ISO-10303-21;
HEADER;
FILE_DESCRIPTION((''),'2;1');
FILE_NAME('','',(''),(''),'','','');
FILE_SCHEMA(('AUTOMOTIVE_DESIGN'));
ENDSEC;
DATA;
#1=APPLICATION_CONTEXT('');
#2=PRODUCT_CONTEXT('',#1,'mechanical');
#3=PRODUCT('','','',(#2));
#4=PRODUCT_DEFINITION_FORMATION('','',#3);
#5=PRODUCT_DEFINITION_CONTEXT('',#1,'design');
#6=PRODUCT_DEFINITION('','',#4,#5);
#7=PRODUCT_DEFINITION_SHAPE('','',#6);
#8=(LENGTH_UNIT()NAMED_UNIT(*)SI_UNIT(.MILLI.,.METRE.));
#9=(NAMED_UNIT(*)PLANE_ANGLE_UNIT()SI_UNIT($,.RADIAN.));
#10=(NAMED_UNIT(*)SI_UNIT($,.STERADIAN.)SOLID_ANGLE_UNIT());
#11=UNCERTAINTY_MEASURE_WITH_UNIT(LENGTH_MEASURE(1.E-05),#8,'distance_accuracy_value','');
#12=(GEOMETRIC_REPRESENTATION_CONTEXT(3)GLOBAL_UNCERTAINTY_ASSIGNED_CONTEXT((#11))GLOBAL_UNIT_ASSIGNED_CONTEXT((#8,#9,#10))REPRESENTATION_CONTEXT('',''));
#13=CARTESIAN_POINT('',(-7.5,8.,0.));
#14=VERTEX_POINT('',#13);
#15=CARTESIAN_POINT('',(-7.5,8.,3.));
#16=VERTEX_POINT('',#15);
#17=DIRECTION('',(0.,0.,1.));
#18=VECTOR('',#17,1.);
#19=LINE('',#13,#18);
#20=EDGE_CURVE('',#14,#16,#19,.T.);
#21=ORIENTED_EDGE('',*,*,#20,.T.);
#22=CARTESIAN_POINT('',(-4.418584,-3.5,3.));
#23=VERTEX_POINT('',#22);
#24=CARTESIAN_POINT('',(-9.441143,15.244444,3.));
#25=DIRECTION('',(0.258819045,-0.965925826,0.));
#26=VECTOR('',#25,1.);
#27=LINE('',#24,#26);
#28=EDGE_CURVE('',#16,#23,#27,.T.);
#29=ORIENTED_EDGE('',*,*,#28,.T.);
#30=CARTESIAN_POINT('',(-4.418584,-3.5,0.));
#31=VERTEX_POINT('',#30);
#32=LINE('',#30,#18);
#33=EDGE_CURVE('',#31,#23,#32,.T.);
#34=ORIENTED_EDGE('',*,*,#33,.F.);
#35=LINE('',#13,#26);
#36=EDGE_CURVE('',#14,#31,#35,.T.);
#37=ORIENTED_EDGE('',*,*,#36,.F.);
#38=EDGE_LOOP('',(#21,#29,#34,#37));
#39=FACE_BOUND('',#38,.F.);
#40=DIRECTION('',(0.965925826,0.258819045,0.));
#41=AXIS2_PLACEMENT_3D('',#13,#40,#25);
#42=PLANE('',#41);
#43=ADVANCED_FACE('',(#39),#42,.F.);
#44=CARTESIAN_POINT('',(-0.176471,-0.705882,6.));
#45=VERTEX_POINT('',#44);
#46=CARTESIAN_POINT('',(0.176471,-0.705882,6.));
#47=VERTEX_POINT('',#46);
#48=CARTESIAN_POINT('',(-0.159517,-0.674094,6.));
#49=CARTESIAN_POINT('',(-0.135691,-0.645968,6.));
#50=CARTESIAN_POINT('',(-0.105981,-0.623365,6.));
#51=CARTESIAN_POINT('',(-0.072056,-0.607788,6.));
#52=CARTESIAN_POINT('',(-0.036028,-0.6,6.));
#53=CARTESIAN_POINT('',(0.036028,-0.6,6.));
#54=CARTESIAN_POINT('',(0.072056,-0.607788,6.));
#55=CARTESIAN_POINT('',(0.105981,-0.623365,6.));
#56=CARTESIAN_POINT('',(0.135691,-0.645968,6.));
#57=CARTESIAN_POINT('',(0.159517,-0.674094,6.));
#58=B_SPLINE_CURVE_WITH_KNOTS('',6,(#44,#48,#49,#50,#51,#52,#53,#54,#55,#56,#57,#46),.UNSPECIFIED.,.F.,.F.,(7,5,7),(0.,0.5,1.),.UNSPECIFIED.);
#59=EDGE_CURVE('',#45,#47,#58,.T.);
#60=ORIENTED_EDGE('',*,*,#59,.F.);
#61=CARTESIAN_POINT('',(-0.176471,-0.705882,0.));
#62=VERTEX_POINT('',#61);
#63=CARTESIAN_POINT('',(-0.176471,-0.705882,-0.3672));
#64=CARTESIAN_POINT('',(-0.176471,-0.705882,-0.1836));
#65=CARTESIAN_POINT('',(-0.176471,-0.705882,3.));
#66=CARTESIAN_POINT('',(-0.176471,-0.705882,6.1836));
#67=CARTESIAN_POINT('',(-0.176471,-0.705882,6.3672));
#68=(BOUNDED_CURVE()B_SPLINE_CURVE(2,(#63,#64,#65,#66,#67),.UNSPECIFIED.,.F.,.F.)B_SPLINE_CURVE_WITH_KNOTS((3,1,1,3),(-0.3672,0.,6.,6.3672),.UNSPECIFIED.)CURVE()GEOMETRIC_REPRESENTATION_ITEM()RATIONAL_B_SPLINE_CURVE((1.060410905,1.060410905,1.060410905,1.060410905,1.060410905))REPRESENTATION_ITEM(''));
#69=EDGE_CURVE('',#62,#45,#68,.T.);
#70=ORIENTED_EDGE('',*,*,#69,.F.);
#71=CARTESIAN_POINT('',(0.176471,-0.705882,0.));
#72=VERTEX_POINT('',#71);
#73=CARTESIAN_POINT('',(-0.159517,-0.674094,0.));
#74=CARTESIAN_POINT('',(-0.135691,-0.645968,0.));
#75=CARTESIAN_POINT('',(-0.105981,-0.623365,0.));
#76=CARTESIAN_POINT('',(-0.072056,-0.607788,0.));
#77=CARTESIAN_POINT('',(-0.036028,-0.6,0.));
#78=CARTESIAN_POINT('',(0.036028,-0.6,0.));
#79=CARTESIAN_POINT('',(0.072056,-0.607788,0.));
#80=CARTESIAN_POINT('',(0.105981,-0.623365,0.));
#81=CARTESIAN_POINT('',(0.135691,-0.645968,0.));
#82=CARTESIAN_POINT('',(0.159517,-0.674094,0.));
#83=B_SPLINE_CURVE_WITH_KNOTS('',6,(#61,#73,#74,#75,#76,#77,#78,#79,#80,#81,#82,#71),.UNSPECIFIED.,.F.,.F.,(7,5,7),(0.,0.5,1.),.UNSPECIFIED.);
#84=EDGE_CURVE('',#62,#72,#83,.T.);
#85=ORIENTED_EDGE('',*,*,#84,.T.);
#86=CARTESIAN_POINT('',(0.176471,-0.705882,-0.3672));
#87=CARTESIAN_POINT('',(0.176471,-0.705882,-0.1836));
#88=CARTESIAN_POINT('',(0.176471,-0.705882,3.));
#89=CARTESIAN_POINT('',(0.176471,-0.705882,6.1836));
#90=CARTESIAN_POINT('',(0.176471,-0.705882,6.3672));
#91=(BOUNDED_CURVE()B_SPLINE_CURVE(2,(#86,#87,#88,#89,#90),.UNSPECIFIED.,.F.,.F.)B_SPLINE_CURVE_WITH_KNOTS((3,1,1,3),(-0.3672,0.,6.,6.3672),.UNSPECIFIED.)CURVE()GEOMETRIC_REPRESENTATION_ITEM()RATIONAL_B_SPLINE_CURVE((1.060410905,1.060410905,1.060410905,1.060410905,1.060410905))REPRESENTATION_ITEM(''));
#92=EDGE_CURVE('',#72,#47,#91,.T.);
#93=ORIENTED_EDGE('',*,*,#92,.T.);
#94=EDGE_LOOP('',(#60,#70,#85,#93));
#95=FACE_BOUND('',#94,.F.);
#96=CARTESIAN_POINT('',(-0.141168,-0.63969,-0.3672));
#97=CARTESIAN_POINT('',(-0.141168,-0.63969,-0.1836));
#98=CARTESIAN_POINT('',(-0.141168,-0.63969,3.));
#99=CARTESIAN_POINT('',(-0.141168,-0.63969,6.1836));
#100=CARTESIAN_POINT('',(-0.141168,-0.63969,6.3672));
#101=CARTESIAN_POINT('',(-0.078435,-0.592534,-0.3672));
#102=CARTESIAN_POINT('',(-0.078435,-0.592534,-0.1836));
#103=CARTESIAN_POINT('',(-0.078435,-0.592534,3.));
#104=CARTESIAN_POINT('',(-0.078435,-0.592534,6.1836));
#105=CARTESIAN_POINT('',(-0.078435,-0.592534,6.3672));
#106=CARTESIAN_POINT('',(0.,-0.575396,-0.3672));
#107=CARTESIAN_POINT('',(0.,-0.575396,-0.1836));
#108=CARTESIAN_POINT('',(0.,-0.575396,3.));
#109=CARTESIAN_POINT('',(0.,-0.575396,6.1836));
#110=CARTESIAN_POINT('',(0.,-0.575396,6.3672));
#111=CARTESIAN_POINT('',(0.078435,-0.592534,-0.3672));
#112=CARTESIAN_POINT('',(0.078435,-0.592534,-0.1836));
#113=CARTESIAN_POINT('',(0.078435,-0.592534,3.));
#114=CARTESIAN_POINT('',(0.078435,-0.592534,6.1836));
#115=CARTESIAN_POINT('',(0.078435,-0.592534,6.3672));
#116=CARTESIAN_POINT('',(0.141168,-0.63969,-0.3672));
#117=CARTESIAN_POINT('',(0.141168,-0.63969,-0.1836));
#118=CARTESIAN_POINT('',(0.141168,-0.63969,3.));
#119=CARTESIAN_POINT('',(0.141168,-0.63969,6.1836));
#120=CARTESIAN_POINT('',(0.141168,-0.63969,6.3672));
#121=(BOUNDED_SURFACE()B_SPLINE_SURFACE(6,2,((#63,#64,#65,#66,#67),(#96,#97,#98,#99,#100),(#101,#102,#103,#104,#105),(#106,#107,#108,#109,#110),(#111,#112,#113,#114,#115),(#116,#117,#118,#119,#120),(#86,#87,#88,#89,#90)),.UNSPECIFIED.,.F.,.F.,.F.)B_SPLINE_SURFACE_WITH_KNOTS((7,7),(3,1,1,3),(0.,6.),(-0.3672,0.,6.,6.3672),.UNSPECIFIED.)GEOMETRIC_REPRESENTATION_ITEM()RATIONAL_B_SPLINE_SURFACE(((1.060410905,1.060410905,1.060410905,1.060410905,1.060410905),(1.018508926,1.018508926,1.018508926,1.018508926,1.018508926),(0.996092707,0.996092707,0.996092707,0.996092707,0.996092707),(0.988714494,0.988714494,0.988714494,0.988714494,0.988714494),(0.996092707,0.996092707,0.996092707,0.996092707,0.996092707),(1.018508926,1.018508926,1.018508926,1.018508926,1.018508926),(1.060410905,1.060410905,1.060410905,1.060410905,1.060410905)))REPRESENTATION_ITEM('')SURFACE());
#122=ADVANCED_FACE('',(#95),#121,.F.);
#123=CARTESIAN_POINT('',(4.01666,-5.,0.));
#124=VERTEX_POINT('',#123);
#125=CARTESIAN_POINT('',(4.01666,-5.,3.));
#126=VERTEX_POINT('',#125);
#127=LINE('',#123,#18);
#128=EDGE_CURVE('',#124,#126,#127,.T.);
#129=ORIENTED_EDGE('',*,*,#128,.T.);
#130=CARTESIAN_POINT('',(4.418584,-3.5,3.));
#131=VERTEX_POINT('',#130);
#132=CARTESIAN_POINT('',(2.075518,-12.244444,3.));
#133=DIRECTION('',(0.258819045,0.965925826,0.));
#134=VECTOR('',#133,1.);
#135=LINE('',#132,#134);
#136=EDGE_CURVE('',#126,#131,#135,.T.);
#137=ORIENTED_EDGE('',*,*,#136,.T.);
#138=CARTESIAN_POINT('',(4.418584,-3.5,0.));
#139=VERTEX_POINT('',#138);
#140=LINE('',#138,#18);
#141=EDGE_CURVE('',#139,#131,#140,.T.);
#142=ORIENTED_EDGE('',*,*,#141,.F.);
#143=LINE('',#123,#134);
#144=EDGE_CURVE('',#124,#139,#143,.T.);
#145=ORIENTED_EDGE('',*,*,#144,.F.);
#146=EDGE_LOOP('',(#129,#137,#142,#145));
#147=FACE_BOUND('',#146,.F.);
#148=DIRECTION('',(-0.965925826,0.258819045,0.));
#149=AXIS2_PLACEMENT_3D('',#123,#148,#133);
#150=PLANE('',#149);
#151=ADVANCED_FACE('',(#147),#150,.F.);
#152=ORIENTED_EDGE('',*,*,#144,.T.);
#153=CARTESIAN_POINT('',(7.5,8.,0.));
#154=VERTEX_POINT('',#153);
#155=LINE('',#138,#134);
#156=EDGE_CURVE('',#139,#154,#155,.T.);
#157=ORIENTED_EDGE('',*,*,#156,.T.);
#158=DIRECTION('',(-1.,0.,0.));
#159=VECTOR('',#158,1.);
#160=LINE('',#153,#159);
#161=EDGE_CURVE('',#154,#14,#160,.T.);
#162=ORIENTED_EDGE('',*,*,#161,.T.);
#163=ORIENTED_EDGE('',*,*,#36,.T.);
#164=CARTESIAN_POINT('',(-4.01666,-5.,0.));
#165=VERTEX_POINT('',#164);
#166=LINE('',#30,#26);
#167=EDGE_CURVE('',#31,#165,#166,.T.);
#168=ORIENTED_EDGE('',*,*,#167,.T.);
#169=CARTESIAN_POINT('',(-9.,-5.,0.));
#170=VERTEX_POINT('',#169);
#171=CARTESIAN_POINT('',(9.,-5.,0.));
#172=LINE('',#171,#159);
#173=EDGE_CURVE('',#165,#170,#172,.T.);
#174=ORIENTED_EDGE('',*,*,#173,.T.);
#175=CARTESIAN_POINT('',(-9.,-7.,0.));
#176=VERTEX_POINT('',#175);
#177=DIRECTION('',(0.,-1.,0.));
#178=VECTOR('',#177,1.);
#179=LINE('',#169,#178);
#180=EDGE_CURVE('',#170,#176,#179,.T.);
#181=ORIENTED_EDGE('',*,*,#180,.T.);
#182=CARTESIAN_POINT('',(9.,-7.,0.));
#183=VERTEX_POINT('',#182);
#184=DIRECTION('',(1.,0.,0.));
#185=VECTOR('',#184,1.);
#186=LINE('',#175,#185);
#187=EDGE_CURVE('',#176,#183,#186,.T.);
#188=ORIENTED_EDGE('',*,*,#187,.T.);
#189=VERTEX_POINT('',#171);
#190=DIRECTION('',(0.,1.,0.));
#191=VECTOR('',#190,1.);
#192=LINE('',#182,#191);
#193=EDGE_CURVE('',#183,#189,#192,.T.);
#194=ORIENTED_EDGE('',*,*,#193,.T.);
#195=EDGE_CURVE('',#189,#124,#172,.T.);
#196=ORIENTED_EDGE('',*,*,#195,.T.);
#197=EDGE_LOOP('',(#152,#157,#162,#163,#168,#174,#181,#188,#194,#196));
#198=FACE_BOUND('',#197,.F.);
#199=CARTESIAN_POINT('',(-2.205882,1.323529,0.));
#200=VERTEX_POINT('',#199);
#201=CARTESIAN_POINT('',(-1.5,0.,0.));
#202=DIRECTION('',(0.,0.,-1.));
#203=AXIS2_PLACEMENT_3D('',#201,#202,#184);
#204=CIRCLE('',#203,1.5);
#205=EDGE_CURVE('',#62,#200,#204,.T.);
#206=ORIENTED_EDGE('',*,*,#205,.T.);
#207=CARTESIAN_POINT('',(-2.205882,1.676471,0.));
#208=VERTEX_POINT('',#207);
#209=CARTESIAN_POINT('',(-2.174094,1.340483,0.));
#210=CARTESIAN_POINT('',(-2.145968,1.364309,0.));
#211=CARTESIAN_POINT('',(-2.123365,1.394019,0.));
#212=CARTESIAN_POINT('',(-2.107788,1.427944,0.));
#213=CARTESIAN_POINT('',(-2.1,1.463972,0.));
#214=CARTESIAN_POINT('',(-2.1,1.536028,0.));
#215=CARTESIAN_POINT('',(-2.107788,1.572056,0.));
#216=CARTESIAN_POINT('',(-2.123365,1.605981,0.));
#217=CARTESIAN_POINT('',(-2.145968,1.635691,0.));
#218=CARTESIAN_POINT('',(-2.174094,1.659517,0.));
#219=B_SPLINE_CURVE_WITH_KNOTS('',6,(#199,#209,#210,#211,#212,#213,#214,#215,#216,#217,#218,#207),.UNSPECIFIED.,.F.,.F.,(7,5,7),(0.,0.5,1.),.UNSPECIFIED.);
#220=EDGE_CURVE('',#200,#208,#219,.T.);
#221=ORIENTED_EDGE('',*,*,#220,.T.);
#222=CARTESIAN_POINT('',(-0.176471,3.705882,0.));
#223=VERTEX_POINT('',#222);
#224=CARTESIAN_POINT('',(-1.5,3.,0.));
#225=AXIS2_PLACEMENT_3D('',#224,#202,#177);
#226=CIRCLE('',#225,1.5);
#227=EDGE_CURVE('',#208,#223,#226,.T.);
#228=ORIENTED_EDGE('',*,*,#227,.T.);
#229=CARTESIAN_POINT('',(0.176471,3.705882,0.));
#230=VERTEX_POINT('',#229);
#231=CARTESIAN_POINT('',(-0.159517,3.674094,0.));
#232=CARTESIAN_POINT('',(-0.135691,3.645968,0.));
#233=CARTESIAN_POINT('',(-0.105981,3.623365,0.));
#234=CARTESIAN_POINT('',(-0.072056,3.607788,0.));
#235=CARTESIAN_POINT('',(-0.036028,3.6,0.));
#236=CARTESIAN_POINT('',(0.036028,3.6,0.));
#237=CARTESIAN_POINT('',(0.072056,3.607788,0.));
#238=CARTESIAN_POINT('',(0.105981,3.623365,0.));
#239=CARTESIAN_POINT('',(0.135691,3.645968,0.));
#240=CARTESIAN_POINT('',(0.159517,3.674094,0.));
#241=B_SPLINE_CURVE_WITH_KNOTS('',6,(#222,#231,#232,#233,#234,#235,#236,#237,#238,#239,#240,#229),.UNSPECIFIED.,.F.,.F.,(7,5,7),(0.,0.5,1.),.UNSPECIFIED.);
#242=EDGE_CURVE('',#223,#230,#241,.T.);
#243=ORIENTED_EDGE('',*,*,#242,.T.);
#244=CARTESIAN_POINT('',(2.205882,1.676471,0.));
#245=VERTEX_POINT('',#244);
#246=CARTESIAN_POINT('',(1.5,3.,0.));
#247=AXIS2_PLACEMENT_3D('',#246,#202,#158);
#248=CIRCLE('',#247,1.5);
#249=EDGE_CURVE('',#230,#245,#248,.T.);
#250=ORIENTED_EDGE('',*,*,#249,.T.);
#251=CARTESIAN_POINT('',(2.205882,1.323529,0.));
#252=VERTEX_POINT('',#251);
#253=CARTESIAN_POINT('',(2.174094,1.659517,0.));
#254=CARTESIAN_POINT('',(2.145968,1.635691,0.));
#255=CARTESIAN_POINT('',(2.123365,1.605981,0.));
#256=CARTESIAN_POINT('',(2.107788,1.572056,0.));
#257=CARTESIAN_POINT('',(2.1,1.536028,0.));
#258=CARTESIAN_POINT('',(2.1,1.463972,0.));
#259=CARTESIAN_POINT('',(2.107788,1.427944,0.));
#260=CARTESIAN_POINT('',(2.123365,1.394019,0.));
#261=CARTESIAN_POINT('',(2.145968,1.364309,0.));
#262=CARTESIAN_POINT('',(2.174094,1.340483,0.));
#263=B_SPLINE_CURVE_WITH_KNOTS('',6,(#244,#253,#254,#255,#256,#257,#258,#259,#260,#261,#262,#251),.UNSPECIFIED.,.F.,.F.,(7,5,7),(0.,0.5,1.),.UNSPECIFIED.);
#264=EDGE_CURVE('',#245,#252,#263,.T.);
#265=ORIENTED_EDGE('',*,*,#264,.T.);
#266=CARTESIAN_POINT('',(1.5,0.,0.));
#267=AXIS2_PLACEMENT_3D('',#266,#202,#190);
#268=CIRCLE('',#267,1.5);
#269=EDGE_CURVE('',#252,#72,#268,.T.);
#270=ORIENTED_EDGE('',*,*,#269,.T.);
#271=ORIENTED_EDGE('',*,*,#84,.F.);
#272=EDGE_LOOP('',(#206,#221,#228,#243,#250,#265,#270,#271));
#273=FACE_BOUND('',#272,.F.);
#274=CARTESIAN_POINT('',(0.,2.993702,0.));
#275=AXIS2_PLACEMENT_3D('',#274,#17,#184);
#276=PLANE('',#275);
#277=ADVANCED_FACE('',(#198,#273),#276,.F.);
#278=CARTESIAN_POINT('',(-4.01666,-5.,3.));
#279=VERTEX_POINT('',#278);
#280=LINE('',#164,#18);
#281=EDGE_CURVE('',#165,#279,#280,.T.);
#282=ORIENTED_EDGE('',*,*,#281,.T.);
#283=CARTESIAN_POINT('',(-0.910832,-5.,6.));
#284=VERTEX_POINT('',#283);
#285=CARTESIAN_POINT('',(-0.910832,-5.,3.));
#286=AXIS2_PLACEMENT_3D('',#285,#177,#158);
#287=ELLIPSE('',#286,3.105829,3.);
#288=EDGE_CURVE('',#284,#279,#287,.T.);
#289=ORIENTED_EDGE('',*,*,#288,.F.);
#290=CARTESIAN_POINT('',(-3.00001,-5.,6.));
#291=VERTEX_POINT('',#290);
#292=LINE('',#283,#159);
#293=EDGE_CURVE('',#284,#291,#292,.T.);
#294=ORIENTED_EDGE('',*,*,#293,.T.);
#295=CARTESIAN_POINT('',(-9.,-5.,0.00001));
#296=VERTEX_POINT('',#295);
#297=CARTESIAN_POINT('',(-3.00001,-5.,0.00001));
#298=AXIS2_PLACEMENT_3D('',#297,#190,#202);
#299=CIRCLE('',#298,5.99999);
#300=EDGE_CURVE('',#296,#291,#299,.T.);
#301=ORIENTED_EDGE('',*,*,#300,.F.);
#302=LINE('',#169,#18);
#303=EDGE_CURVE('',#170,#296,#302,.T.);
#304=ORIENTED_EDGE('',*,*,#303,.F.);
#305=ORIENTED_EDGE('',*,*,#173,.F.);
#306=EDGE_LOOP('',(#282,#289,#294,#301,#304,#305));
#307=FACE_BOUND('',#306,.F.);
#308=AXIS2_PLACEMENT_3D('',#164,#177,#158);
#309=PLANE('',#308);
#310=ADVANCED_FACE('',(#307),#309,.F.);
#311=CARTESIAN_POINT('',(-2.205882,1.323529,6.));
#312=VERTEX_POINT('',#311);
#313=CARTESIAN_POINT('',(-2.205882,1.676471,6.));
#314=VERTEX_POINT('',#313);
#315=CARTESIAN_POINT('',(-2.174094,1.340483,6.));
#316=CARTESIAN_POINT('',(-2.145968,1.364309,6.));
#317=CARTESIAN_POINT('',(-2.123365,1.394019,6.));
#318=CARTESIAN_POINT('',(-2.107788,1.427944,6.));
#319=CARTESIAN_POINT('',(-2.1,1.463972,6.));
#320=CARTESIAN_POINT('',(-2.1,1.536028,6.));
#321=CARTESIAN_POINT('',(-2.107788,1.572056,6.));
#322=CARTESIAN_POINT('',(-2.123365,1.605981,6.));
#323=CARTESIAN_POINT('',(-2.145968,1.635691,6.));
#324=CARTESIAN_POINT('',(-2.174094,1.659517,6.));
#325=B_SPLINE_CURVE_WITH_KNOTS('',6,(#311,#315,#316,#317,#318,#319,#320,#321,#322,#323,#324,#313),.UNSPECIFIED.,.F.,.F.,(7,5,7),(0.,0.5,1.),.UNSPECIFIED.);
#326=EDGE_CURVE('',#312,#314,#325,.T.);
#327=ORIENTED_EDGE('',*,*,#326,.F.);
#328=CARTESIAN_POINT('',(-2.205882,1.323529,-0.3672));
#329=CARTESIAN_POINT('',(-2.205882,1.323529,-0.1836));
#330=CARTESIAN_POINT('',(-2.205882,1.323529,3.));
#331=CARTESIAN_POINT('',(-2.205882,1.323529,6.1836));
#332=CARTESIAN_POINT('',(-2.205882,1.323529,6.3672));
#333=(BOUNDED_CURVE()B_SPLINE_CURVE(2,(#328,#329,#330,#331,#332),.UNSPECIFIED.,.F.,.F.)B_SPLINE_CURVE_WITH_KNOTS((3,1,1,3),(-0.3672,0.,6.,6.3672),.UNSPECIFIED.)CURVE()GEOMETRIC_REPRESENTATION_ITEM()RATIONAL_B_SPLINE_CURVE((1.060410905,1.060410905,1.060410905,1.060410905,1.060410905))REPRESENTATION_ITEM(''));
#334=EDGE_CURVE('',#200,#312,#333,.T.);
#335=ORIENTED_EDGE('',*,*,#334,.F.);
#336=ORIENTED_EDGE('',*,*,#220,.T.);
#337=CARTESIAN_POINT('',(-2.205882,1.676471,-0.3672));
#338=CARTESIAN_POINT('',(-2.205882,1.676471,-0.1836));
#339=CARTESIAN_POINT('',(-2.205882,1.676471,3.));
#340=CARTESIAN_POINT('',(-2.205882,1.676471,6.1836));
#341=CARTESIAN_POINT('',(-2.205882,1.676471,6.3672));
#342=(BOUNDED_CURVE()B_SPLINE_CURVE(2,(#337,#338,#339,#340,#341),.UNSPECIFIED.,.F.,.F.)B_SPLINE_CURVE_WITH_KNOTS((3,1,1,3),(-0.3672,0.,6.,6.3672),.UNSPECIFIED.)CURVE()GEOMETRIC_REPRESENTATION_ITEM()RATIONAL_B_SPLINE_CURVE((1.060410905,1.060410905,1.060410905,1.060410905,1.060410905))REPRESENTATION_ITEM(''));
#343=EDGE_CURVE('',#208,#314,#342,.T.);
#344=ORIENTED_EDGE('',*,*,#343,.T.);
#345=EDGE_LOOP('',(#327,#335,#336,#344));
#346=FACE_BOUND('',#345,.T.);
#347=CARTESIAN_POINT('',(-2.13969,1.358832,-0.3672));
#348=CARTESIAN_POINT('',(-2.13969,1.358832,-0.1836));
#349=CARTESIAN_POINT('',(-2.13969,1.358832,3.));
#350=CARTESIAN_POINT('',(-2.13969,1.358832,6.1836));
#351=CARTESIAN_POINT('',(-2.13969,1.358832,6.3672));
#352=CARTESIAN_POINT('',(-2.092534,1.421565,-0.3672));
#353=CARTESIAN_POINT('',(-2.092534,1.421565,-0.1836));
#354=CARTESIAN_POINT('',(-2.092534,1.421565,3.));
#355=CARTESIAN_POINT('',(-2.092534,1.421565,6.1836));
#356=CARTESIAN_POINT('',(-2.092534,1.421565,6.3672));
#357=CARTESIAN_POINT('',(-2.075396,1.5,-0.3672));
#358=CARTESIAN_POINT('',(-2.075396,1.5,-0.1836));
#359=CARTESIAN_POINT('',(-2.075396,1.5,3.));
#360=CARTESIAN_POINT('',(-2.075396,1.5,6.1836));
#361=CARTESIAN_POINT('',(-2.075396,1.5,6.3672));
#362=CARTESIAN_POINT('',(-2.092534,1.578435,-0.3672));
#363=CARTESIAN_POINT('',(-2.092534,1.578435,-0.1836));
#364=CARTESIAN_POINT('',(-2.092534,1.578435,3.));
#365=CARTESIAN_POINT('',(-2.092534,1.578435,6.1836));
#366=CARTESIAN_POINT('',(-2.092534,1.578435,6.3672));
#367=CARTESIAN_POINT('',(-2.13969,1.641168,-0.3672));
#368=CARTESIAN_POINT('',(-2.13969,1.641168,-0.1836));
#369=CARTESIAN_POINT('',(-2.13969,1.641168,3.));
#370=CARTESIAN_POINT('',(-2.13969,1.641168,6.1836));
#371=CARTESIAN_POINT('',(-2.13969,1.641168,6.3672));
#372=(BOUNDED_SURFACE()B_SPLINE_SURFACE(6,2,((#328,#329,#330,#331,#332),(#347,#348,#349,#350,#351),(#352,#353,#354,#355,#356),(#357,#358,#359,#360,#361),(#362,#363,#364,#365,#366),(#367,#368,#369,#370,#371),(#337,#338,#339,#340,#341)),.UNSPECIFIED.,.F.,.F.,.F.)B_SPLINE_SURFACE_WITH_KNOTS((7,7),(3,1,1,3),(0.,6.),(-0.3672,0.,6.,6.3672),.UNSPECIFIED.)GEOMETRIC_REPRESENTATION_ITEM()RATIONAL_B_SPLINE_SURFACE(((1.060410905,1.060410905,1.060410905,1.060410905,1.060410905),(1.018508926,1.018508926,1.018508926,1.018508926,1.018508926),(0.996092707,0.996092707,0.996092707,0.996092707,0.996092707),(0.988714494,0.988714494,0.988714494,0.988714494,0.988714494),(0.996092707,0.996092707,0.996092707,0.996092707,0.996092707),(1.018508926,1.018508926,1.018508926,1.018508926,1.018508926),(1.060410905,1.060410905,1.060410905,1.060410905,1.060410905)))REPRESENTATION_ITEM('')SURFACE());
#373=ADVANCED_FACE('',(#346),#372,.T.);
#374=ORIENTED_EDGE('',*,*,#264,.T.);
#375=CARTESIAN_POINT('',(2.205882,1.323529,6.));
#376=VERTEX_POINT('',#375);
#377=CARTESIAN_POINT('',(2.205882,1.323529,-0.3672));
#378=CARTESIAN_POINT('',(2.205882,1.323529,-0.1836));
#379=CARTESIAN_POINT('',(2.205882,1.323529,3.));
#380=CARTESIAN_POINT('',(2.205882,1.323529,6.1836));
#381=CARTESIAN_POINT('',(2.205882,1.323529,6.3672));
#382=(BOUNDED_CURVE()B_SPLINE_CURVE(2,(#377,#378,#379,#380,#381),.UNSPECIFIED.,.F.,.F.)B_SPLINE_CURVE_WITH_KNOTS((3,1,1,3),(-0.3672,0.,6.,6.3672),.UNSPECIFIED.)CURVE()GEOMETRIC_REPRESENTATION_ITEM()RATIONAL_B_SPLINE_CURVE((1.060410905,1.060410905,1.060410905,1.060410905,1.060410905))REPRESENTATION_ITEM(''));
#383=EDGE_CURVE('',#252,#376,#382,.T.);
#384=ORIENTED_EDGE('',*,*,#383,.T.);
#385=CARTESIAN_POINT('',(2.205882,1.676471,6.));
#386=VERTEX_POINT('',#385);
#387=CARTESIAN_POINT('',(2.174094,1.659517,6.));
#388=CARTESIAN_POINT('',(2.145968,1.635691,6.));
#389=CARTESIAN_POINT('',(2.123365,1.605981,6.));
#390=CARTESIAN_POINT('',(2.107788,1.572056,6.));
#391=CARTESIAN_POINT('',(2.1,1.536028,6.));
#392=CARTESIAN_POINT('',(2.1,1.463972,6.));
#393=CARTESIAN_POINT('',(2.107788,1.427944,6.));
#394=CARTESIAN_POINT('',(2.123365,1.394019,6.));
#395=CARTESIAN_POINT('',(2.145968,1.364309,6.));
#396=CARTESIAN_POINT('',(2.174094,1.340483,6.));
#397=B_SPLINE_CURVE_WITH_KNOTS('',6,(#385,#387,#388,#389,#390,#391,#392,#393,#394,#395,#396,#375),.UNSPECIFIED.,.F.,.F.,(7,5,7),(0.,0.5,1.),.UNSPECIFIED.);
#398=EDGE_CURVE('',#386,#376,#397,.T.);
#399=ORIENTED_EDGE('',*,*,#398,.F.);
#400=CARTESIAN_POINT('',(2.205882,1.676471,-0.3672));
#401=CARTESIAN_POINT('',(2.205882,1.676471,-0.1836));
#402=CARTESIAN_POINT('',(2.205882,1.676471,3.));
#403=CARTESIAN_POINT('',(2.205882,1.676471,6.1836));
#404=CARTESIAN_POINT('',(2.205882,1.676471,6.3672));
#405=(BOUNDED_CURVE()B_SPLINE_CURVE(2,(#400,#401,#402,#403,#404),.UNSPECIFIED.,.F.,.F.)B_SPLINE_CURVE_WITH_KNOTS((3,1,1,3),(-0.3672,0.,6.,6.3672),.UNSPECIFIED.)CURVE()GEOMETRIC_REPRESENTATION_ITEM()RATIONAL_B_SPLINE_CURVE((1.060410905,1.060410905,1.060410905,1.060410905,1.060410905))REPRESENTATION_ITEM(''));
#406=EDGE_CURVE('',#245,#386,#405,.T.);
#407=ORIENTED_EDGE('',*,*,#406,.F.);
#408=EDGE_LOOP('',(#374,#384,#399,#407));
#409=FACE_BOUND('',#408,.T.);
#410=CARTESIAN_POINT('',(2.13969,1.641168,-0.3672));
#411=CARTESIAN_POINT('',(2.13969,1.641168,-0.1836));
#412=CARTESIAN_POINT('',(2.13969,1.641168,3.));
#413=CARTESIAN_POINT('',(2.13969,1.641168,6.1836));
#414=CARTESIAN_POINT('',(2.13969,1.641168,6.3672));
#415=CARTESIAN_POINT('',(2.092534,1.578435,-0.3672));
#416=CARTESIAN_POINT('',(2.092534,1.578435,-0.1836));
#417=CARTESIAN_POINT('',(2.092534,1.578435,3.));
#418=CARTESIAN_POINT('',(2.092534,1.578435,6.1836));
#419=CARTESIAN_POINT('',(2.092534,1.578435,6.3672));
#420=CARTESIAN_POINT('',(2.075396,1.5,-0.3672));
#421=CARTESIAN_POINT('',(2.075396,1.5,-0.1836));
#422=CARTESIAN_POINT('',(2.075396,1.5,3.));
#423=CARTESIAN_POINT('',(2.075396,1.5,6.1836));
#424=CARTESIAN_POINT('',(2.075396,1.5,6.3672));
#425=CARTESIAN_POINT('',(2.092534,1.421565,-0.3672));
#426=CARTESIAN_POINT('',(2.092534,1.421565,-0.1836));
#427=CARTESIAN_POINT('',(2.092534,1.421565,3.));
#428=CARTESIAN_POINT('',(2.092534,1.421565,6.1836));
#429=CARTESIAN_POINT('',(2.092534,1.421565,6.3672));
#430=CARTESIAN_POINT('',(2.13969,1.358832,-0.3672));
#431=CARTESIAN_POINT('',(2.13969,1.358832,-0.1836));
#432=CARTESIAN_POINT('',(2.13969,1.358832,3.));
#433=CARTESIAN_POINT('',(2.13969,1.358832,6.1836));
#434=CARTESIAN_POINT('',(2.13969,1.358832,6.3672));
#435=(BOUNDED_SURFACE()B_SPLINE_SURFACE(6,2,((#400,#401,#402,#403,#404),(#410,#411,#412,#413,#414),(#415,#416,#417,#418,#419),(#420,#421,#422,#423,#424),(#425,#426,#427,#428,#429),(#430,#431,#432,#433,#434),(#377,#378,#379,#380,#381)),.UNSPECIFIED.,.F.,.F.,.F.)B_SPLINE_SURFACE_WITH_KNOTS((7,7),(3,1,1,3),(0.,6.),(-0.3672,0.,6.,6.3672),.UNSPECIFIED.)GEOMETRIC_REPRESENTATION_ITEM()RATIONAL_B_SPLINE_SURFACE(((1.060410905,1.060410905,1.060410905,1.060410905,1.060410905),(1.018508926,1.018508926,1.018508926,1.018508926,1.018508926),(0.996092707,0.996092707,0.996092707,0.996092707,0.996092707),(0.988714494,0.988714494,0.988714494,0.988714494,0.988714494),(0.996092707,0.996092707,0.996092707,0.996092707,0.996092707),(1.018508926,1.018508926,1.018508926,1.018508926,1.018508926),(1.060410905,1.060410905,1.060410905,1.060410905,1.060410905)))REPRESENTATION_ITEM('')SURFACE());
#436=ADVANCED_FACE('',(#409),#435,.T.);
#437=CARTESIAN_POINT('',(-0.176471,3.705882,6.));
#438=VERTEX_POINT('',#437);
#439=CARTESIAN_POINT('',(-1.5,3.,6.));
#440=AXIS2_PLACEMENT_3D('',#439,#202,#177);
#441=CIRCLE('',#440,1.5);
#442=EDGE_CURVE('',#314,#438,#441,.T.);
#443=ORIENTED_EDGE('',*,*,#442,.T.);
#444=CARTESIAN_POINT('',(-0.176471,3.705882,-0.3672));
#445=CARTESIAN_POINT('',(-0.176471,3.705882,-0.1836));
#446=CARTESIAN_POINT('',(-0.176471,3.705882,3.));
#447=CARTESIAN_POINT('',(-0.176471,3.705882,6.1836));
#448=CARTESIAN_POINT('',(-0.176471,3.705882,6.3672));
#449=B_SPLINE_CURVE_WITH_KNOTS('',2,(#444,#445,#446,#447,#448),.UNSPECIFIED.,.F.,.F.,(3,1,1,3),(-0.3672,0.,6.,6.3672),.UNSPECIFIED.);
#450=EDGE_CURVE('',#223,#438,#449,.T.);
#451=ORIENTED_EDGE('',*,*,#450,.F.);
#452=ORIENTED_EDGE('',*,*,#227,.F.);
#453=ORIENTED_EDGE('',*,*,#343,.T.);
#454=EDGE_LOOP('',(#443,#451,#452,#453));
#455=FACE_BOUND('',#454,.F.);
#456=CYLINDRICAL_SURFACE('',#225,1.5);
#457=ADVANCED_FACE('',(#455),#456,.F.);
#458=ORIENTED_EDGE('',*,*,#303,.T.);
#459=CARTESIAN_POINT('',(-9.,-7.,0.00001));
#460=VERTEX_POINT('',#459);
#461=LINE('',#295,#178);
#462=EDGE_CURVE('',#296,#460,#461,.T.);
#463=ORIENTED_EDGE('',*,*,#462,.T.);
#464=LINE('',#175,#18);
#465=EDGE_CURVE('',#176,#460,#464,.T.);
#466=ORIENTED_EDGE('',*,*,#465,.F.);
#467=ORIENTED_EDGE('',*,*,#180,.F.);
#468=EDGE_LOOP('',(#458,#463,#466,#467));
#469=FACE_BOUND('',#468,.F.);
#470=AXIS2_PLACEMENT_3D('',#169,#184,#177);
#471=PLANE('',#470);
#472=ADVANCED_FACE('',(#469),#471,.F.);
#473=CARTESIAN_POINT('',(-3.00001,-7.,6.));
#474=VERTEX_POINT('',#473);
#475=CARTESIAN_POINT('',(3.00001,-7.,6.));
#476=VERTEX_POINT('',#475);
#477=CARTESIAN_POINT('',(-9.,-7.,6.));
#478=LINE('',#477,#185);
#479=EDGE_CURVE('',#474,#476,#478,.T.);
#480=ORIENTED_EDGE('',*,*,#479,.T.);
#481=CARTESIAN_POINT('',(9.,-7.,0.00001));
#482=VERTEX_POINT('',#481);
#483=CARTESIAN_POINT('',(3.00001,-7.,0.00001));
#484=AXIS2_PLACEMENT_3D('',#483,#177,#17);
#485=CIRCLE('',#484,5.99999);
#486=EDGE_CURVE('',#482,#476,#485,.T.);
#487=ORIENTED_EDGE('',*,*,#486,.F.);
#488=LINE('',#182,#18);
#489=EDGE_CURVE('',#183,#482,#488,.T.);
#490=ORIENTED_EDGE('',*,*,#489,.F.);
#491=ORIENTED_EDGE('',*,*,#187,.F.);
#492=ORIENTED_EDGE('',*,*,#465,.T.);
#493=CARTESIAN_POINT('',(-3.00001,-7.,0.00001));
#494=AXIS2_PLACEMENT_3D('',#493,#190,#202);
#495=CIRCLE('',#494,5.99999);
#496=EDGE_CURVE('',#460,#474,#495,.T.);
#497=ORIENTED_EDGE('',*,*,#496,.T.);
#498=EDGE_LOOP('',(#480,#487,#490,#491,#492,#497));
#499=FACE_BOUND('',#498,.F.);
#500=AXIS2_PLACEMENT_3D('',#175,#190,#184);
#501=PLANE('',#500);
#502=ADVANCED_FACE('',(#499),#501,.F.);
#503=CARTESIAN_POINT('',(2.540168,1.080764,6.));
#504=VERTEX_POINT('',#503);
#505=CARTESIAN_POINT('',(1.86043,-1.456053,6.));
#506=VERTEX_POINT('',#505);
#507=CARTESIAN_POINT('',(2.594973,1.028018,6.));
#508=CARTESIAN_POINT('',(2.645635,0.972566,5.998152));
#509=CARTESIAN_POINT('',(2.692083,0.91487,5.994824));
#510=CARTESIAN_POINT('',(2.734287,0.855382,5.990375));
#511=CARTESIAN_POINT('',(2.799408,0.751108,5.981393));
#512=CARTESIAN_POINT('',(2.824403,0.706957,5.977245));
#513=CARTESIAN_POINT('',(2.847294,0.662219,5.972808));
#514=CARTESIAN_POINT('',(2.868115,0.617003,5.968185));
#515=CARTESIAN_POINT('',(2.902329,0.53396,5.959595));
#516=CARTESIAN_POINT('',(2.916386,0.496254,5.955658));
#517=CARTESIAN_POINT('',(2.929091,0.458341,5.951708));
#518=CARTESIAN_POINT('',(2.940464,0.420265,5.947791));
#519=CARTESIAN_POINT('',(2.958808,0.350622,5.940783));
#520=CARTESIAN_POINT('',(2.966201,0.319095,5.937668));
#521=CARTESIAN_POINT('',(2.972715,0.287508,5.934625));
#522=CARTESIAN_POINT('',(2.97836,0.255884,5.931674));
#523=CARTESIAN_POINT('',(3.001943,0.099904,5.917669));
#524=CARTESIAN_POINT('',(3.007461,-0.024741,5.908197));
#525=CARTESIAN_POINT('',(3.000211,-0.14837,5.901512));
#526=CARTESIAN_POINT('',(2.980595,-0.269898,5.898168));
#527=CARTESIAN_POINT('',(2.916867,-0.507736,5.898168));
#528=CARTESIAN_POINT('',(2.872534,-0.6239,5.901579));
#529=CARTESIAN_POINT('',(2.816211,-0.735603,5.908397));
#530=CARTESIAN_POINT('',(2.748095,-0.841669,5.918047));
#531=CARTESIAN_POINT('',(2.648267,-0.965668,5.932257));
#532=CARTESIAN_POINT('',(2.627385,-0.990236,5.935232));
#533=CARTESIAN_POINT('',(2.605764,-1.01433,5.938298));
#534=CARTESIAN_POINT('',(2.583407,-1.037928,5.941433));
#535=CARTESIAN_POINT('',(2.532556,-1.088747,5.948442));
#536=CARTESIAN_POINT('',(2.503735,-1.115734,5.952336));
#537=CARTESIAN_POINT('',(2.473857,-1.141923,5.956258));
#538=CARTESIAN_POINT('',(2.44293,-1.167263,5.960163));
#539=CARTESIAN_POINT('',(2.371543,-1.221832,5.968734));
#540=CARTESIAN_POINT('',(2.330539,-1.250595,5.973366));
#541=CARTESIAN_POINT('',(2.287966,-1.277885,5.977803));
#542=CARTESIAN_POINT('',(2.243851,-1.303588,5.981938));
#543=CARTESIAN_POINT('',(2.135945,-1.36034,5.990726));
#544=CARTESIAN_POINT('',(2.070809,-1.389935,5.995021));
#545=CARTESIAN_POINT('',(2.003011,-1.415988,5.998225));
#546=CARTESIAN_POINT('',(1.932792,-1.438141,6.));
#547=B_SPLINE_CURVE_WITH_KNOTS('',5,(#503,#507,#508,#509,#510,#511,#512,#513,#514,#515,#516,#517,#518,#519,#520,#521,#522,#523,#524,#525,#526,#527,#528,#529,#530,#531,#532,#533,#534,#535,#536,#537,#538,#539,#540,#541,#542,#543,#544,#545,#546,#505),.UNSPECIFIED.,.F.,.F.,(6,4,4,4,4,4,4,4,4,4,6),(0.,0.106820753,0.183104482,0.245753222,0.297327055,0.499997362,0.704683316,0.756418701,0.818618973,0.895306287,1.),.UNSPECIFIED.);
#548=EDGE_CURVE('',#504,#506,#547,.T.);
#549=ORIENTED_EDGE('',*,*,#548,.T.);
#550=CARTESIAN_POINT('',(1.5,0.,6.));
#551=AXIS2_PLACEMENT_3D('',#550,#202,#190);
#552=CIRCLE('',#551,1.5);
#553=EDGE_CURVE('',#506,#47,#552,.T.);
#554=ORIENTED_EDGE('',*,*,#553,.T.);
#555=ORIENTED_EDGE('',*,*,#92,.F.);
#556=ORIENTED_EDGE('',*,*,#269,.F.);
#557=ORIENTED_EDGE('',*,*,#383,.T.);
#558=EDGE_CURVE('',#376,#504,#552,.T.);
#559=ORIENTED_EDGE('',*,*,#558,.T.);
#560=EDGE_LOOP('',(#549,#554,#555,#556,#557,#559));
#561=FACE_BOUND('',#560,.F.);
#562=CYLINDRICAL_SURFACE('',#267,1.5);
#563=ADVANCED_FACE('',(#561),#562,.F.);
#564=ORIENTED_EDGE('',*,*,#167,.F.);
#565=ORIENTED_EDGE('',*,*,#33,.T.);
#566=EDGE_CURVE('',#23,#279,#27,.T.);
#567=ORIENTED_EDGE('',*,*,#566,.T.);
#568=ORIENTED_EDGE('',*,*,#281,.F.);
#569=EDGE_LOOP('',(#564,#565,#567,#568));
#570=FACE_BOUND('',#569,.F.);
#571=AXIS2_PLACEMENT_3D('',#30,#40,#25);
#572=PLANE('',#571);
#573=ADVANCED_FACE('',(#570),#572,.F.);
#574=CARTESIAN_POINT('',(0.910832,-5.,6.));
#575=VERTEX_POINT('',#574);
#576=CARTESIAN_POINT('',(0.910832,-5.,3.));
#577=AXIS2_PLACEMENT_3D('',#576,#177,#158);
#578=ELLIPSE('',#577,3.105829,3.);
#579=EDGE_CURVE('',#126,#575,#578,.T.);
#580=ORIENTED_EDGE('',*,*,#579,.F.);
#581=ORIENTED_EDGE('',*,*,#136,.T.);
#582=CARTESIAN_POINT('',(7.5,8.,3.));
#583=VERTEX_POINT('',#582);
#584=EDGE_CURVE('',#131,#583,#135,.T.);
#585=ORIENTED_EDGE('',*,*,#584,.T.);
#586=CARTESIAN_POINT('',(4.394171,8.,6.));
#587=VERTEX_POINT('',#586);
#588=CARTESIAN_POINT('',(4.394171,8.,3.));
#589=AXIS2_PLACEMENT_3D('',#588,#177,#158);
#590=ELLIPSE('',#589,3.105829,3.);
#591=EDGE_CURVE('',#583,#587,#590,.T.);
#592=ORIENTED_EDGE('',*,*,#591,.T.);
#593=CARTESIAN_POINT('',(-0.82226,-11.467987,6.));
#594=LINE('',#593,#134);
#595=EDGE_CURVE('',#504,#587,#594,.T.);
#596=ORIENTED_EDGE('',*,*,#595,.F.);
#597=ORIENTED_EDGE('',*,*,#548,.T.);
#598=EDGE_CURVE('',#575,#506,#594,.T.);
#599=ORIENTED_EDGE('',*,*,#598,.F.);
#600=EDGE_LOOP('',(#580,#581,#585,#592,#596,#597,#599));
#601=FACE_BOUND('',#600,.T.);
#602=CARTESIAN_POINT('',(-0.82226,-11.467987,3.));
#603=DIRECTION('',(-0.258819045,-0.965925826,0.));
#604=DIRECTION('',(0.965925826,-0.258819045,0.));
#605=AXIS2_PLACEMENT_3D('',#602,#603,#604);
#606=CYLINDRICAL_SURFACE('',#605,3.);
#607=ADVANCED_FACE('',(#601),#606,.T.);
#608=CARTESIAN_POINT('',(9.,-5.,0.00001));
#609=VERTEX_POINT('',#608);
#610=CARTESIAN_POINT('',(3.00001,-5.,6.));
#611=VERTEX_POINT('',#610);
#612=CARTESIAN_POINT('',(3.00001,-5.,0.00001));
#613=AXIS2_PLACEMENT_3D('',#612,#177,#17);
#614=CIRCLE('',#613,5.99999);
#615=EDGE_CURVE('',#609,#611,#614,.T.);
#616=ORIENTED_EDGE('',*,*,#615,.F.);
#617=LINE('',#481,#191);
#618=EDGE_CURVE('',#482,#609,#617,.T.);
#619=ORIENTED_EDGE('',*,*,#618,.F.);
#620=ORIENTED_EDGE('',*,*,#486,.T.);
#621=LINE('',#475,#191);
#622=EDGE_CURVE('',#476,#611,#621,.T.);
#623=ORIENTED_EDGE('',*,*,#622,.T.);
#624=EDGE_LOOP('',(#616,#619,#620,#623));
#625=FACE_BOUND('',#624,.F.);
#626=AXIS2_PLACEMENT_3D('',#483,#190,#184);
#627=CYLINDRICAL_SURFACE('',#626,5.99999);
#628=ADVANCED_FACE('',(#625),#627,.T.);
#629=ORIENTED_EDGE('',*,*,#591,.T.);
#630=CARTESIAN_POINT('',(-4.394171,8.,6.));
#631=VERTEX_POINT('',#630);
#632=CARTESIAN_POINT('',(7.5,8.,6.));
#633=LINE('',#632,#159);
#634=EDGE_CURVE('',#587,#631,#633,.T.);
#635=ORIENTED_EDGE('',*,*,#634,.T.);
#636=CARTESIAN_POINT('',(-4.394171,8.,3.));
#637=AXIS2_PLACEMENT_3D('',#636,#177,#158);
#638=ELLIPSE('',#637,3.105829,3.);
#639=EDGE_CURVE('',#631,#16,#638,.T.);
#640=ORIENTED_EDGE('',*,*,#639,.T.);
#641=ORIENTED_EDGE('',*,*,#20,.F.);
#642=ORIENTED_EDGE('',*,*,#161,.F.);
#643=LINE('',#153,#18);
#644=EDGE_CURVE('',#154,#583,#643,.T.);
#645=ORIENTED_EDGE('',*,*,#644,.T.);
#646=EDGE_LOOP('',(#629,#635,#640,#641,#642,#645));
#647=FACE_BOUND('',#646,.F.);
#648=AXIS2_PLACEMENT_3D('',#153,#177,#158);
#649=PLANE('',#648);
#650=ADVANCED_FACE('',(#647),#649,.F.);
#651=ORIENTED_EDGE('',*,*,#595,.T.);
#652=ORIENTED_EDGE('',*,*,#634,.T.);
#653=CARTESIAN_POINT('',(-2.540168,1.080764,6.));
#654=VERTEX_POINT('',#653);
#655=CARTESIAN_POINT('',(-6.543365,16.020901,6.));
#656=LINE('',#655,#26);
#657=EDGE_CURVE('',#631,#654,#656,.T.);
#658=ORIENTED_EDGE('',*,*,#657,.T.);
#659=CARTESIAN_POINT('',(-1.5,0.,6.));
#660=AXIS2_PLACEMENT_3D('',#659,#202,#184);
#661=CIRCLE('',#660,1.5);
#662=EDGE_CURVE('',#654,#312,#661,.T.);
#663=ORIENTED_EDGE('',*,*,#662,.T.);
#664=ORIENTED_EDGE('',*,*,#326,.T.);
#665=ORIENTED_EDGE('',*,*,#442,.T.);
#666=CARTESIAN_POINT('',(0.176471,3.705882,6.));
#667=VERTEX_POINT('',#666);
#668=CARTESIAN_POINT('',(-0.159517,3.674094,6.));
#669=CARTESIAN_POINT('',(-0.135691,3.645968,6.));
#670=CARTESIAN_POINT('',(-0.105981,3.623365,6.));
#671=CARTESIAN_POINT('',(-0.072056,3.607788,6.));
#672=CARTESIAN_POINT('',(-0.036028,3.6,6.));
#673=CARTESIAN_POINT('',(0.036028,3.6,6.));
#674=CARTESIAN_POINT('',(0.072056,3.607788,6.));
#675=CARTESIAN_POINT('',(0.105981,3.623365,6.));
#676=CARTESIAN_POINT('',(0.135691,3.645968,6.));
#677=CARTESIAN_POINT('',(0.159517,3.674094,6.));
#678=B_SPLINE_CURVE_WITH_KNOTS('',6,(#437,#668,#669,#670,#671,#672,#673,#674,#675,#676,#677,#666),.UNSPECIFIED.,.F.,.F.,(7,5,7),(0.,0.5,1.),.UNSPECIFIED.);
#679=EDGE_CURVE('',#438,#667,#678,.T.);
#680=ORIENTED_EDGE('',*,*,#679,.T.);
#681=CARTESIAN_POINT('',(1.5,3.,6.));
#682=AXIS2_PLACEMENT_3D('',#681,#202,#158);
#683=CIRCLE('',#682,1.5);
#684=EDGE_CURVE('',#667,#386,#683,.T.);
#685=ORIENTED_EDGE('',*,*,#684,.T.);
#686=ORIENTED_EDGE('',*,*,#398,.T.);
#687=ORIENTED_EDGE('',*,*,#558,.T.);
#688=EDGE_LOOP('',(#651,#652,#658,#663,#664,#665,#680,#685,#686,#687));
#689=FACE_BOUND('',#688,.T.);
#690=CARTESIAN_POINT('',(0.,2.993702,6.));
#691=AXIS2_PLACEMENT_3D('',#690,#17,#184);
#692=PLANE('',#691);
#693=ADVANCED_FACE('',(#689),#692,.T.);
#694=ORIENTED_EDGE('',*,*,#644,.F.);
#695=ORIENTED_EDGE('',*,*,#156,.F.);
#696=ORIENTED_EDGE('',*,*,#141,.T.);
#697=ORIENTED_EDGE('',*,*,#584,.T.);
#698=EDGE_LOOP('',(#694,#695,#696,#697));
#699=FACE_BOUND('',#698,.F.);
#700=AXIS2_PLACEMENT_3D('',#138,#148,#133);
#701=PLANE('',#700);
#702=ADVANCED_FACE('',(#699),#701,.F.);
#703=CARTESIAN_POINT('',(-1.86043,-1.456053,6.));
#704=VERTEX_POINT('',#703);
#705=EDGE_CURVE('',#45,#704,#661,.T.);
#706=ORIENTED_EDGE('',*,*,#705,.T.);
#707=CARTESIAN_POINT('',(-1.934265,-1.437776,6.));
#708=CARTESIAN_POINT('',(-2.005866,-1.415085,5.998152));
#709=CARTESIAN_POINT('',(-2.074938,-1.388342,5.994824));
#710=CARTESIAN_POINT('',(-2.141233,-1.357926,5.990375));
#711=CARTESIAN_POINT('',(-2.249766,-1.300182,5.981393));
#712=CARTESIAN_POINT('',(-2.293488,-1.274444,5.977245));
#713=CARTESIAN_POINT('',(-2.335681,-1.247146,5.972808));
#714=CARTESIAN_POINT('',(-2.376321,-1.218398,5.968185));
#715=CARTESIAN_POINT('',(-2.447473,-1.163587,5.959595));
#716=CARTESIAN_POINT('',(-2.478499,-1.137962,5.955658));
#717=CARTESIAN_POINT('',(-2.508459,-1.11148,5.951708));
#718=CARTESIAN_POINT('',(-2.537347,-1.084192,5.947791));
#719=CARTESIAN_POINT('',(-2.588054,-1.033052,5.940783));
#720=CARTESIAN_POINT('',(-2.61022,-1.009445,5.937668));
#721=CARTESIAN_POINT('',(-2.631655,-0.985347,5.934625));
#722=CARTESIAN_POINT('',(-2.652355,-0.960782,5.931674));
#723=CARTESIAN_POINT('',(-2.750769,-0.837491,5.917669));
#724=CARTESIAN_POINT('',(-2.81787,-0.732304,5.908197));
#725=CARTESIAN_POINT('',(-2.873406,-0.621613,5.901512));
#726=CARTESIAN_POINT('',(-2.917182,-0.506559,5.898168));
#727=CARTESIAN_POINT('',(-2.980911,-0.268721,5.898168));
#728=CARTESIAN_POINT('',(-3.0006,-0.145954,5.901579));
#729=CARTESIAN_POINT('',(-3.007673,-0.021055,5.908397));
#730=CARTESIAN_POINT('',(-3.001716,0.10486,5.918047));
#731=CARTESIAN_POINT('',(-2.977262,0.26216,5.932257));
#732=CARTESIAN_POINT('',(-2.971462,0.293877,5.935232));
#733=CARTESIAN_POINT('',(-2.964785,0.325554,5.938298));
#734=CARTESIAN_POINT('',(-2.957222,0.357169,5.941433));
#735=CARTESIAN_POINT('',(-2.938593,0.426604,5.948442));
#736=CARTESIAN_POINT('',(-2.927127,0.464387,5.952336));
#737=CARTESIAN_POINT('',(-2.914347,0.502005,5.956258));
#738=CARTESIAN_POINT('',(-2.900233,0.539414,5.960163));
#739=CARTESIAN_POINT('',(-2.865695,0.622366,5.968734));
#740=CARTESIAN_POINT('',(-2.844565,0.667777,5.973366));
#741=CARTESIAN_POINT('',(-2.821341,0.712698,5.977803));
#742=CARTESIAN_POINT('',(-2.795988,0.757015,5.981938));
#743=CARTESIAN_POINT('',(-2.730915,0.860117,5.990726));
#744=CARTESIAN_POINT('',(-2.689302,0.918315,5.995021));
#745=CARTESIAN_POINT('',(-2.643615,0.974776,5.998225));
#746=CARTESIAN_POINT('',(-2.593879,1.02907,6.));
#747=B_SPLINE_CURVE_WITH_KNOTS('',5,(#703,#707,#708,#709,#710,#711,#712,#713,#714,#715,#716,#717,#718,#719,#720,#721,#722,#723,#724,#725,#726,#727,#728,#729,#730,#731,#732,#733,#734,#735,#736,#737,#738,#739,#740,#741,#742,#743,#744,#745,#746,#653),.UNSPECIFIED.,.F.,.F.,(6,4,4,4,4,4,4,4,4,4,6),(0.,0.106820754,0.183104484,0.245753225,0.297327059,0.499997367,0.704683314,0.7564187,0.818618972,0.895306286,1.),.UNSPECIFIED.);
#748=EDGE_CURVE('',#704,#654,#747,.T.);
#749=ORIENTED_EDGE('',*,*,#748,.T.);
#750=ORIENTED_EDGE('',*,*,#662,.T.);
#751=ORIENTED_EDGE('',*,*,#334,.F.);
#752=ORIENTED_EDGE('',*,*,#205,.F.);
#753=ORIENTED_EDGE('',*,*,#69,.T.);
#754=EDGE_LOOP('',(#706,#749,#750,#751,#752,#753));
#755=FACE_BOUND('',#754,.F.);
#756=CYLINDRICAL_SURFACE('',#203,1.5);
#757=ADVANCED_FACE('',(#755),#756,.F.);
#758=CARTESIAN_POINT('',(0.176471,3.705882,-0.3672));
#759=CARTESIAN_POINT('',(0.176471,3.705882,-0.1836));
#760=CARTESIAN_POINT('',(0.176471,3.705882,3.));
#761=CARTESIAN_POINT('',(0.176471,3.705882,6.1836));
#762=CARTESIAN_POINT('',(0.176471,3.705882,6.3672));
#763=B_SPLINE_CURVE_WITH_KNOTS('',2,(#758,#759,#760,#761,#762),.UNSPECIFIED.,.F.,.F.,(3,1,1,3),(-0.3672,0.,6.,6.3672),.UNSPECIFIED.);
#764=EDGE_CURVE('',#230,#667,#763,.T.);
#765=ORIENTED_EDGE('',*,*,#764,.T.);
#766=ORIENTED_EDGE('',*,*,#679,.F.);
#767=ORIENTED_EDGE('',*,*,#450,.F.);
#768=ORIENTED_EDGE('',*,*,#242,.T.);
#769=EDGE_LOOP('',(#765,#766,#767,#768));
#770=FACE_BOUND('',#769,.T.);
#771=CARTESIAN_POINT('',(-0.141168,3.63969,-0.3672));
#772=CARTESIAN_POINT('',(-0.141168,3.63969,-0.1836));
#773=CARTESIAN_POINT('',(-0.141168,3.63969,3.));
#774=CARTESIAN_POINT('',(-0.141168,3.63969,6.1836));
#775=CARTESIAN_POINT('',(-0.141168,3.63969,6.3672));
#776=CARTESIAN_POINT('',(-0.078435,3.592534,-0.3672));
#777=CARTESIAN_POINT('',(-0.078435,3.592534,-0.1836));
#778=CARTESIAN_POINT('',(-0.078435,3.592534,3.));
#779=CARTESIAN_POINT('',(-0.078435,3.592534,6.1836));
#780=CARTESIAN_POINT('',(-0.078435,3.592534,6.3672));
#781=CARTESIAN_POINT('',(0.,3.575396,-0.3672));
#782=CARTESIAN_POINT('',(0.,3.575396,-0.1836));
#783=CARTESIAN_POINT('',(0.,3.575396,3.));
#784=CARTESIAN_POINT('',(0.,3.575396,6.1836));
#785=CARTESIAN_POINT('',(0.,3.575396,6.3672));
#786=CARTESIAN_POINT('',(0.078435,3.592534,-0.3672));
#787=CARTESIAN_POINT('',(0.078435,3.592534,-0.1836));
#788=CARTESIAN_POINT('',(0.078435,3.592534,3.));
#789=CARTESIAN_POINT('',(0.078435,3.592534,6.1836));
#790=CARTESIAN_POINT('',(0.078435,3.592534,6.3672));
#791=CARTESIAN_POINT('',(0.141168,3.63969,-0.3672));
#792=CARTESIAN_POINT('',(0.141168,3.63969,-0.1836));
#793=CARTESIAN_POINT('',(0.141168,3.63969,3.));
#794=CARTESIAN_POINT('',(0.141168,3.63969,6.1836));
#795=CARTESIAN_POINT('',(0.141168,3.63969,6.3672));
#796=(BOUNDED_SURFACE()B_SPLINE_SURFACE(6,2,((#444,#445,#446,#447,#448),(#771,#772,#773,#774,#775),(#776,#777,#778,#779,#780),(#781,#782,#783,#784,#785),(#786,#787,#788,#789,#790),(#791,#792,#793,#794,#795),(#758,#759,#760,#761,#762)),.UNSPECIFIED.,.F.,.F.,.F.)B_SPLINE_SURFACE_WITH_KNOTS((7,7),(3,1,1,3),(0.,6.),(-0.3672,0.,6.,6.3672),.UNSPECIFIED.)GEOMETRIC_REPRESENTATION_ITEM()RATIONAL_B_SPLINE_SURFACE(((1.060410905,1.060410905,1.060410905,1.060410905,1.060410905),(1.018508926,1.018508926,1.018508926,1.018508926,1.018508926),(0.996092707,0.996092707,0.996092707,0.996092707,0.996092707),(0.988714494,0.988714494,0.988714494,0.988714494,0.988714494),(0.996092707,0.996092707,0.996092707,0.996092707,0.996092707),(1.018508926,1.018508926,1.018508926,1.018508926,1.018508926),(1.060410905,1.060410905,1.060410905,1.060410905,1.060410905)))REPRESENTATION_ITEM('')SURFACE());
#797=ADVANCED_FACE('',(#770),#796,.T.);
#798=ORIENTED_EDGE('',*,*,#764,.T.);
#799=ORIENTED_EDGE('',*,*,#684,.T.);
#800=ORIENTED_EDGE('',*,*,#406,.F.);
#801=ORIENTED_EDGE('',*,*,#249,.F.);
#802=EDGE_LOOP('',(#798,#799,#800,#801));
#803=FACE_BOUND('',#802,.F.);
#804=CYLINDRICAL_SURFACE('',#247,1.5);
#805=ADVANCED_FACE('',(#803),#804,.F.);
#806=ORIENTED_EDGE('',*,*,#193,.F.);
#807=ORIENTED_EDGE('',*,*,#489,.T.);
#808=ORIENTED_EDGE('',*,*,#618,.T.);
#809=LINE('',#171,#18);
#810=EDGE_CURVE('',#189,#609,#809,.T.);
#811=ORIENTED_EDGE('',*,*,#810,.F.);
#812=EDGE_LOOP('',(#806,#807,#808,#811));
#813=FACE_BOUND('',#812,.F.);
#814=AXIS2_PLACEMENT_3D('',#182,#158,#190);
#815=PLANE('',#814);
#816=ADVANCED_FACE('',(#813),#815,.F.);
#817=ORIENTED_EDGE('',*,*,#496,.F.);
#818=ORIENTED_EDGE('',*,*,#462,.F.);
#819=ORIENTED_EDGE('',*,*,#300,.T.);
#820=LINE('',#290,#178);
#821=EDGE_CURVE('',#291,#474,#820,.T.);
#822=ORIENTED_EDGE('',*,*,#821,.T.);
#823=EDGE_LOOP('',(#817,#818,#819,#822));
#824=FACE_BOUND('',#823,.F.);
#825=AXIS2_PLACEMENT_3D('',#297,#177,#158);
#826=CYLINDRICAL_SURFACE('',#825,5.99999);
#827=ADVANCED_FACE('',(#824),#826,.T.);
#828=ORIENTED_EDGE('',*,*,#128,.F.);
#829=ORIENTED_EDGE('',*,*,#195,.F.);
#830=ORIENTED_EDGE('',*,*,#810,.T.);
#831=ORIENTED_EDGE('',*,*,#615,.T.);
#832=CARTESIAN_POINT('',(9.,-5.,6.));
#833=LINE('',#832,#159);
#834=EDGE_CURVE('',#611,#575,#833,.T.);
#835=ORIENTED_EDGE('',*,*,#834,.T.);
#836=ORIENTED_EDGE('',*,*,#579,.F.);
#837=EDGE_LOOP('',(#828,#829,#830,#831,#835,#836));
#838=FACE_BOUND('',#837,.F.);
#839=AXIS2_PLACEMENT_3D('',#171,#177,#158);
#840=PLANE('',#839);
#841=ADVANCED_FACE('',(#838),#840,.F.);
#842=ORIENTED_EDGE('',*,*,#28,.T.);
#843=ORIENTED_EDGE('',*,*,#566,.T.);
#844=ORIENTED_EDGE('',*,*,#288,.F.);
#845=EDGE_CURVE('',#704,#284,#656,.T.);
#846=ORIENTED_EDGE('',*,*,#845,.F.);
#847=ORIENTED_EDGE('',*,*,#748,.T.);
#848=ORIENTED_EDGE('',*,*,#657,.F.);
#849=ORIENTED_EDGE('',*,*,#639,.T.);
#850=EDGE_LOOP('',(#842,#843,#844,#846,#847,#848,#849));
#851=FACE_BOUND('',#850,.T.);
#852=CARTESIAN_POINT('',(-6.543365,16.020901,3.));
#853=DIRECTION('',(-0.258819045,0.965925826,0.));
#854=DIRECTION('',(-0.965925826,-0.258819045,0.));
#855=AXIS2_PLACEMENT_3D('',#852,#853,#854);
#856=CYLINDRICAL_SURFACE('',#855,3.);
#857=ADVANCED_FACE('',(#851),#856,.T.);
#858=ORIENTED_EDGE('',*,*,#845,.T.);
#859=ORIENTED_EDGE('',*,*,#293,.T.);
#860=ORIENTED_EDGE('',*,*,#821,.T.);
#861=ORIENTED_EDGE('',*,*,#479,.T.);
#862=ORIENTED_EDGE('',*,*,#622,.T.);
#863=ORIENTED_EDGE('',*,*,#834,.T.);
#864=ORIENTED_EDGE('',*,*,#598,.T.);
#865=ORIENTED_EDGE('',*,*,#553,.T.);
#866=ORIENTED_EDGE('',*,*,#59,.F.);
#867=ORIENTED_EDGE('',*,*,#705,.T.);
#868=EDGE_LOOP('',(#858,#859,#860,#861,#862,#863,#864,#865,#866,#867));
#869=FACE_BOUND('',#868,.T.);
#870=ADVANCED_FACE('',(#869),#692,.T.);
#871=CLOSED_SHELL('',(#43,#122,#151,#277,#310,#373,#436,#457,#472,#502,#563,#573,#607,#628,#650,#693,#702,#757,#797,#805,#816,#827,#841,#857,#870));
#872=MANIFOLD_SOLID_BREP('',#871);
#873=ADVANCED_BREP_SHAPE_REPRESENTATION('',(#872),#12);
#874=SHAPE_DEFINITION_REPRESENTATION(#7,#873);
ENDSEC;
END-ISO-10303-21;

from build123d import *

# Parameters (mm, degrees)
F1_DEPTH    = 6
F2_F1_R     = 0.2
F2_F2_R     = 0.2
F3_T4_DEPTH = 28.4585903453
F3_T9_DEPTH = 28.4585903453
F4_R        = 5.99999


# Not quite as in the source:
# - a fillet or chamfer that OpenCascade refuses, or shapes differently, is made with other operations: its cross-section is extruded or revolved along the edge and cut away or added
# - a fillet or chamfer is up to 0.001 mm smaller than in the source, because OpenCascade refuses the exact size


with BuildPart() as f1:
    # F0 (on Top) → F1 (new body)
    with BuildSketch(Plane.XY):
        Polygon((-7.5, 8), (-4.418584287, -3.5), (4.418584287, -3.5), (7.5, 8), align=None)
        with BuildLine():
            ThreePointArc((-1.5, 1.5), (-2.5606601718, 4.0606601718), (0, 3))
            ThreePointArc((0, 3), (2.5606601718, 4.0606601718), (1.5, 1.5))
            ThreePointArc((1.5, 1.5), (2.5606601718, -1.0606601718), (0, 0))
            ThreePointArc((0, 0), (-2.5606601718, -1.0606601718), (-1.5, 1.5))
        make_face(mode=Mode.SUBTRACT)
        Polygon((-9, -5), (-9, -7), (9, -7), (9, -5), (4.0166604984, -5), (-4.0166604984, -5), align=None)
        Polygon((-4.418584287, -3.5), (-4.0166604984, -5), (4.0166604984, -5), (4.418584287, -3.5), align=None)
    extrude(amount=F1_DEPTH)

    # F2: fillet of radius 0.2 on 4 edges, made by hand

    # F2_f1
    f2_f1_edges = [f1.edges().sort_by_distance(p)[0] for p in [
        (-1.5, 1.5, 3),
        (0, 3, 3),
        (1.5, 1.5, 3),
    ]]
    fillet(f2_f1_edges, radius=F2_F1_R)

    # F2_f2
    f2_f2_edges = [f1.edges().sort_by_distance(p)[0] for p in [
        (0, 0, 3),
    ]]
    fillet(f2_f2_edges, radius=F2_F2_R)

    # F3: fillet of radius 3 on 2 edges, made by hand


with BuildPart() as f3_tool2:
    # F3_s3 → F3_t4 (new body)
    with BuildSketch(Plane(origin=(-4.4435475741, 16.5835453123, 0), x_dir=(0, 0, 1), z_dir=(0.2588190451, -0.9659258263, 0))):
        with BuildLine():
            ThreePointArc((3, 5.1738913363), (5.1213203436, 4.2952116799), (6, 2.1738913363))
            Line((6, 2.1738913363), (6, 5.1738913363))
            Line((6, 5.1738913363), (3, 5.1738913363))
        make_face()
    extrude(amount=F3_T4_DEPTH)

    split(bisect_by=Plane.XZ.offset(5), keep=Keep.BOTTOM)


with BuildPart() as f1_1:
    add(f1.part)

    # F3_t1: cut F3_tool2
    add(f3_tool2.part, mode=Mode.SUBTRACT)


with BuildPart() as f3_tool7:
    # F3_s8 → F3_t9 (new body)
    with BuildSketch(Plane(origin=(-2.9220776041, -10.905342082, 0), x_dir=(0, 0, 1), z_dir=(0.2588190451, 0.9659258263, 0))):
        with BuildLine():
            ThreePointArc((3, 5.1738913363), (5.1213203436, 4.2952116799), (6, 2.1738913363))
            Line((6, 2.1738913363), (6, 5.1738913363))
            Line((6, 5.1738913363), (3, 5.1738913363))
        make_face()
    extrude(amount=F3_T9_DEPTH)

    split(bisect_by=Plane.XZ.offset(5), keep=Keep.BOTTOM)


with BuildPart() as f1_2:
    add(f1_1.part)

    # F3_t6: cut F3_tool7
    add(f3_tool7.part, mode=Mode.SUBTRACT)

    # F4 (radius 6 in the source; OpenCascade refuses exactly that, so slightly less here)
    f4_edges = [f1_2.edges().sort_by_distance(p)[0] for p in [
        (9, -6, 6),
        (-9, -6, 6),
    ]]
    fillet(f4_edges, radius=F4_R)


solid = f1_2.part
